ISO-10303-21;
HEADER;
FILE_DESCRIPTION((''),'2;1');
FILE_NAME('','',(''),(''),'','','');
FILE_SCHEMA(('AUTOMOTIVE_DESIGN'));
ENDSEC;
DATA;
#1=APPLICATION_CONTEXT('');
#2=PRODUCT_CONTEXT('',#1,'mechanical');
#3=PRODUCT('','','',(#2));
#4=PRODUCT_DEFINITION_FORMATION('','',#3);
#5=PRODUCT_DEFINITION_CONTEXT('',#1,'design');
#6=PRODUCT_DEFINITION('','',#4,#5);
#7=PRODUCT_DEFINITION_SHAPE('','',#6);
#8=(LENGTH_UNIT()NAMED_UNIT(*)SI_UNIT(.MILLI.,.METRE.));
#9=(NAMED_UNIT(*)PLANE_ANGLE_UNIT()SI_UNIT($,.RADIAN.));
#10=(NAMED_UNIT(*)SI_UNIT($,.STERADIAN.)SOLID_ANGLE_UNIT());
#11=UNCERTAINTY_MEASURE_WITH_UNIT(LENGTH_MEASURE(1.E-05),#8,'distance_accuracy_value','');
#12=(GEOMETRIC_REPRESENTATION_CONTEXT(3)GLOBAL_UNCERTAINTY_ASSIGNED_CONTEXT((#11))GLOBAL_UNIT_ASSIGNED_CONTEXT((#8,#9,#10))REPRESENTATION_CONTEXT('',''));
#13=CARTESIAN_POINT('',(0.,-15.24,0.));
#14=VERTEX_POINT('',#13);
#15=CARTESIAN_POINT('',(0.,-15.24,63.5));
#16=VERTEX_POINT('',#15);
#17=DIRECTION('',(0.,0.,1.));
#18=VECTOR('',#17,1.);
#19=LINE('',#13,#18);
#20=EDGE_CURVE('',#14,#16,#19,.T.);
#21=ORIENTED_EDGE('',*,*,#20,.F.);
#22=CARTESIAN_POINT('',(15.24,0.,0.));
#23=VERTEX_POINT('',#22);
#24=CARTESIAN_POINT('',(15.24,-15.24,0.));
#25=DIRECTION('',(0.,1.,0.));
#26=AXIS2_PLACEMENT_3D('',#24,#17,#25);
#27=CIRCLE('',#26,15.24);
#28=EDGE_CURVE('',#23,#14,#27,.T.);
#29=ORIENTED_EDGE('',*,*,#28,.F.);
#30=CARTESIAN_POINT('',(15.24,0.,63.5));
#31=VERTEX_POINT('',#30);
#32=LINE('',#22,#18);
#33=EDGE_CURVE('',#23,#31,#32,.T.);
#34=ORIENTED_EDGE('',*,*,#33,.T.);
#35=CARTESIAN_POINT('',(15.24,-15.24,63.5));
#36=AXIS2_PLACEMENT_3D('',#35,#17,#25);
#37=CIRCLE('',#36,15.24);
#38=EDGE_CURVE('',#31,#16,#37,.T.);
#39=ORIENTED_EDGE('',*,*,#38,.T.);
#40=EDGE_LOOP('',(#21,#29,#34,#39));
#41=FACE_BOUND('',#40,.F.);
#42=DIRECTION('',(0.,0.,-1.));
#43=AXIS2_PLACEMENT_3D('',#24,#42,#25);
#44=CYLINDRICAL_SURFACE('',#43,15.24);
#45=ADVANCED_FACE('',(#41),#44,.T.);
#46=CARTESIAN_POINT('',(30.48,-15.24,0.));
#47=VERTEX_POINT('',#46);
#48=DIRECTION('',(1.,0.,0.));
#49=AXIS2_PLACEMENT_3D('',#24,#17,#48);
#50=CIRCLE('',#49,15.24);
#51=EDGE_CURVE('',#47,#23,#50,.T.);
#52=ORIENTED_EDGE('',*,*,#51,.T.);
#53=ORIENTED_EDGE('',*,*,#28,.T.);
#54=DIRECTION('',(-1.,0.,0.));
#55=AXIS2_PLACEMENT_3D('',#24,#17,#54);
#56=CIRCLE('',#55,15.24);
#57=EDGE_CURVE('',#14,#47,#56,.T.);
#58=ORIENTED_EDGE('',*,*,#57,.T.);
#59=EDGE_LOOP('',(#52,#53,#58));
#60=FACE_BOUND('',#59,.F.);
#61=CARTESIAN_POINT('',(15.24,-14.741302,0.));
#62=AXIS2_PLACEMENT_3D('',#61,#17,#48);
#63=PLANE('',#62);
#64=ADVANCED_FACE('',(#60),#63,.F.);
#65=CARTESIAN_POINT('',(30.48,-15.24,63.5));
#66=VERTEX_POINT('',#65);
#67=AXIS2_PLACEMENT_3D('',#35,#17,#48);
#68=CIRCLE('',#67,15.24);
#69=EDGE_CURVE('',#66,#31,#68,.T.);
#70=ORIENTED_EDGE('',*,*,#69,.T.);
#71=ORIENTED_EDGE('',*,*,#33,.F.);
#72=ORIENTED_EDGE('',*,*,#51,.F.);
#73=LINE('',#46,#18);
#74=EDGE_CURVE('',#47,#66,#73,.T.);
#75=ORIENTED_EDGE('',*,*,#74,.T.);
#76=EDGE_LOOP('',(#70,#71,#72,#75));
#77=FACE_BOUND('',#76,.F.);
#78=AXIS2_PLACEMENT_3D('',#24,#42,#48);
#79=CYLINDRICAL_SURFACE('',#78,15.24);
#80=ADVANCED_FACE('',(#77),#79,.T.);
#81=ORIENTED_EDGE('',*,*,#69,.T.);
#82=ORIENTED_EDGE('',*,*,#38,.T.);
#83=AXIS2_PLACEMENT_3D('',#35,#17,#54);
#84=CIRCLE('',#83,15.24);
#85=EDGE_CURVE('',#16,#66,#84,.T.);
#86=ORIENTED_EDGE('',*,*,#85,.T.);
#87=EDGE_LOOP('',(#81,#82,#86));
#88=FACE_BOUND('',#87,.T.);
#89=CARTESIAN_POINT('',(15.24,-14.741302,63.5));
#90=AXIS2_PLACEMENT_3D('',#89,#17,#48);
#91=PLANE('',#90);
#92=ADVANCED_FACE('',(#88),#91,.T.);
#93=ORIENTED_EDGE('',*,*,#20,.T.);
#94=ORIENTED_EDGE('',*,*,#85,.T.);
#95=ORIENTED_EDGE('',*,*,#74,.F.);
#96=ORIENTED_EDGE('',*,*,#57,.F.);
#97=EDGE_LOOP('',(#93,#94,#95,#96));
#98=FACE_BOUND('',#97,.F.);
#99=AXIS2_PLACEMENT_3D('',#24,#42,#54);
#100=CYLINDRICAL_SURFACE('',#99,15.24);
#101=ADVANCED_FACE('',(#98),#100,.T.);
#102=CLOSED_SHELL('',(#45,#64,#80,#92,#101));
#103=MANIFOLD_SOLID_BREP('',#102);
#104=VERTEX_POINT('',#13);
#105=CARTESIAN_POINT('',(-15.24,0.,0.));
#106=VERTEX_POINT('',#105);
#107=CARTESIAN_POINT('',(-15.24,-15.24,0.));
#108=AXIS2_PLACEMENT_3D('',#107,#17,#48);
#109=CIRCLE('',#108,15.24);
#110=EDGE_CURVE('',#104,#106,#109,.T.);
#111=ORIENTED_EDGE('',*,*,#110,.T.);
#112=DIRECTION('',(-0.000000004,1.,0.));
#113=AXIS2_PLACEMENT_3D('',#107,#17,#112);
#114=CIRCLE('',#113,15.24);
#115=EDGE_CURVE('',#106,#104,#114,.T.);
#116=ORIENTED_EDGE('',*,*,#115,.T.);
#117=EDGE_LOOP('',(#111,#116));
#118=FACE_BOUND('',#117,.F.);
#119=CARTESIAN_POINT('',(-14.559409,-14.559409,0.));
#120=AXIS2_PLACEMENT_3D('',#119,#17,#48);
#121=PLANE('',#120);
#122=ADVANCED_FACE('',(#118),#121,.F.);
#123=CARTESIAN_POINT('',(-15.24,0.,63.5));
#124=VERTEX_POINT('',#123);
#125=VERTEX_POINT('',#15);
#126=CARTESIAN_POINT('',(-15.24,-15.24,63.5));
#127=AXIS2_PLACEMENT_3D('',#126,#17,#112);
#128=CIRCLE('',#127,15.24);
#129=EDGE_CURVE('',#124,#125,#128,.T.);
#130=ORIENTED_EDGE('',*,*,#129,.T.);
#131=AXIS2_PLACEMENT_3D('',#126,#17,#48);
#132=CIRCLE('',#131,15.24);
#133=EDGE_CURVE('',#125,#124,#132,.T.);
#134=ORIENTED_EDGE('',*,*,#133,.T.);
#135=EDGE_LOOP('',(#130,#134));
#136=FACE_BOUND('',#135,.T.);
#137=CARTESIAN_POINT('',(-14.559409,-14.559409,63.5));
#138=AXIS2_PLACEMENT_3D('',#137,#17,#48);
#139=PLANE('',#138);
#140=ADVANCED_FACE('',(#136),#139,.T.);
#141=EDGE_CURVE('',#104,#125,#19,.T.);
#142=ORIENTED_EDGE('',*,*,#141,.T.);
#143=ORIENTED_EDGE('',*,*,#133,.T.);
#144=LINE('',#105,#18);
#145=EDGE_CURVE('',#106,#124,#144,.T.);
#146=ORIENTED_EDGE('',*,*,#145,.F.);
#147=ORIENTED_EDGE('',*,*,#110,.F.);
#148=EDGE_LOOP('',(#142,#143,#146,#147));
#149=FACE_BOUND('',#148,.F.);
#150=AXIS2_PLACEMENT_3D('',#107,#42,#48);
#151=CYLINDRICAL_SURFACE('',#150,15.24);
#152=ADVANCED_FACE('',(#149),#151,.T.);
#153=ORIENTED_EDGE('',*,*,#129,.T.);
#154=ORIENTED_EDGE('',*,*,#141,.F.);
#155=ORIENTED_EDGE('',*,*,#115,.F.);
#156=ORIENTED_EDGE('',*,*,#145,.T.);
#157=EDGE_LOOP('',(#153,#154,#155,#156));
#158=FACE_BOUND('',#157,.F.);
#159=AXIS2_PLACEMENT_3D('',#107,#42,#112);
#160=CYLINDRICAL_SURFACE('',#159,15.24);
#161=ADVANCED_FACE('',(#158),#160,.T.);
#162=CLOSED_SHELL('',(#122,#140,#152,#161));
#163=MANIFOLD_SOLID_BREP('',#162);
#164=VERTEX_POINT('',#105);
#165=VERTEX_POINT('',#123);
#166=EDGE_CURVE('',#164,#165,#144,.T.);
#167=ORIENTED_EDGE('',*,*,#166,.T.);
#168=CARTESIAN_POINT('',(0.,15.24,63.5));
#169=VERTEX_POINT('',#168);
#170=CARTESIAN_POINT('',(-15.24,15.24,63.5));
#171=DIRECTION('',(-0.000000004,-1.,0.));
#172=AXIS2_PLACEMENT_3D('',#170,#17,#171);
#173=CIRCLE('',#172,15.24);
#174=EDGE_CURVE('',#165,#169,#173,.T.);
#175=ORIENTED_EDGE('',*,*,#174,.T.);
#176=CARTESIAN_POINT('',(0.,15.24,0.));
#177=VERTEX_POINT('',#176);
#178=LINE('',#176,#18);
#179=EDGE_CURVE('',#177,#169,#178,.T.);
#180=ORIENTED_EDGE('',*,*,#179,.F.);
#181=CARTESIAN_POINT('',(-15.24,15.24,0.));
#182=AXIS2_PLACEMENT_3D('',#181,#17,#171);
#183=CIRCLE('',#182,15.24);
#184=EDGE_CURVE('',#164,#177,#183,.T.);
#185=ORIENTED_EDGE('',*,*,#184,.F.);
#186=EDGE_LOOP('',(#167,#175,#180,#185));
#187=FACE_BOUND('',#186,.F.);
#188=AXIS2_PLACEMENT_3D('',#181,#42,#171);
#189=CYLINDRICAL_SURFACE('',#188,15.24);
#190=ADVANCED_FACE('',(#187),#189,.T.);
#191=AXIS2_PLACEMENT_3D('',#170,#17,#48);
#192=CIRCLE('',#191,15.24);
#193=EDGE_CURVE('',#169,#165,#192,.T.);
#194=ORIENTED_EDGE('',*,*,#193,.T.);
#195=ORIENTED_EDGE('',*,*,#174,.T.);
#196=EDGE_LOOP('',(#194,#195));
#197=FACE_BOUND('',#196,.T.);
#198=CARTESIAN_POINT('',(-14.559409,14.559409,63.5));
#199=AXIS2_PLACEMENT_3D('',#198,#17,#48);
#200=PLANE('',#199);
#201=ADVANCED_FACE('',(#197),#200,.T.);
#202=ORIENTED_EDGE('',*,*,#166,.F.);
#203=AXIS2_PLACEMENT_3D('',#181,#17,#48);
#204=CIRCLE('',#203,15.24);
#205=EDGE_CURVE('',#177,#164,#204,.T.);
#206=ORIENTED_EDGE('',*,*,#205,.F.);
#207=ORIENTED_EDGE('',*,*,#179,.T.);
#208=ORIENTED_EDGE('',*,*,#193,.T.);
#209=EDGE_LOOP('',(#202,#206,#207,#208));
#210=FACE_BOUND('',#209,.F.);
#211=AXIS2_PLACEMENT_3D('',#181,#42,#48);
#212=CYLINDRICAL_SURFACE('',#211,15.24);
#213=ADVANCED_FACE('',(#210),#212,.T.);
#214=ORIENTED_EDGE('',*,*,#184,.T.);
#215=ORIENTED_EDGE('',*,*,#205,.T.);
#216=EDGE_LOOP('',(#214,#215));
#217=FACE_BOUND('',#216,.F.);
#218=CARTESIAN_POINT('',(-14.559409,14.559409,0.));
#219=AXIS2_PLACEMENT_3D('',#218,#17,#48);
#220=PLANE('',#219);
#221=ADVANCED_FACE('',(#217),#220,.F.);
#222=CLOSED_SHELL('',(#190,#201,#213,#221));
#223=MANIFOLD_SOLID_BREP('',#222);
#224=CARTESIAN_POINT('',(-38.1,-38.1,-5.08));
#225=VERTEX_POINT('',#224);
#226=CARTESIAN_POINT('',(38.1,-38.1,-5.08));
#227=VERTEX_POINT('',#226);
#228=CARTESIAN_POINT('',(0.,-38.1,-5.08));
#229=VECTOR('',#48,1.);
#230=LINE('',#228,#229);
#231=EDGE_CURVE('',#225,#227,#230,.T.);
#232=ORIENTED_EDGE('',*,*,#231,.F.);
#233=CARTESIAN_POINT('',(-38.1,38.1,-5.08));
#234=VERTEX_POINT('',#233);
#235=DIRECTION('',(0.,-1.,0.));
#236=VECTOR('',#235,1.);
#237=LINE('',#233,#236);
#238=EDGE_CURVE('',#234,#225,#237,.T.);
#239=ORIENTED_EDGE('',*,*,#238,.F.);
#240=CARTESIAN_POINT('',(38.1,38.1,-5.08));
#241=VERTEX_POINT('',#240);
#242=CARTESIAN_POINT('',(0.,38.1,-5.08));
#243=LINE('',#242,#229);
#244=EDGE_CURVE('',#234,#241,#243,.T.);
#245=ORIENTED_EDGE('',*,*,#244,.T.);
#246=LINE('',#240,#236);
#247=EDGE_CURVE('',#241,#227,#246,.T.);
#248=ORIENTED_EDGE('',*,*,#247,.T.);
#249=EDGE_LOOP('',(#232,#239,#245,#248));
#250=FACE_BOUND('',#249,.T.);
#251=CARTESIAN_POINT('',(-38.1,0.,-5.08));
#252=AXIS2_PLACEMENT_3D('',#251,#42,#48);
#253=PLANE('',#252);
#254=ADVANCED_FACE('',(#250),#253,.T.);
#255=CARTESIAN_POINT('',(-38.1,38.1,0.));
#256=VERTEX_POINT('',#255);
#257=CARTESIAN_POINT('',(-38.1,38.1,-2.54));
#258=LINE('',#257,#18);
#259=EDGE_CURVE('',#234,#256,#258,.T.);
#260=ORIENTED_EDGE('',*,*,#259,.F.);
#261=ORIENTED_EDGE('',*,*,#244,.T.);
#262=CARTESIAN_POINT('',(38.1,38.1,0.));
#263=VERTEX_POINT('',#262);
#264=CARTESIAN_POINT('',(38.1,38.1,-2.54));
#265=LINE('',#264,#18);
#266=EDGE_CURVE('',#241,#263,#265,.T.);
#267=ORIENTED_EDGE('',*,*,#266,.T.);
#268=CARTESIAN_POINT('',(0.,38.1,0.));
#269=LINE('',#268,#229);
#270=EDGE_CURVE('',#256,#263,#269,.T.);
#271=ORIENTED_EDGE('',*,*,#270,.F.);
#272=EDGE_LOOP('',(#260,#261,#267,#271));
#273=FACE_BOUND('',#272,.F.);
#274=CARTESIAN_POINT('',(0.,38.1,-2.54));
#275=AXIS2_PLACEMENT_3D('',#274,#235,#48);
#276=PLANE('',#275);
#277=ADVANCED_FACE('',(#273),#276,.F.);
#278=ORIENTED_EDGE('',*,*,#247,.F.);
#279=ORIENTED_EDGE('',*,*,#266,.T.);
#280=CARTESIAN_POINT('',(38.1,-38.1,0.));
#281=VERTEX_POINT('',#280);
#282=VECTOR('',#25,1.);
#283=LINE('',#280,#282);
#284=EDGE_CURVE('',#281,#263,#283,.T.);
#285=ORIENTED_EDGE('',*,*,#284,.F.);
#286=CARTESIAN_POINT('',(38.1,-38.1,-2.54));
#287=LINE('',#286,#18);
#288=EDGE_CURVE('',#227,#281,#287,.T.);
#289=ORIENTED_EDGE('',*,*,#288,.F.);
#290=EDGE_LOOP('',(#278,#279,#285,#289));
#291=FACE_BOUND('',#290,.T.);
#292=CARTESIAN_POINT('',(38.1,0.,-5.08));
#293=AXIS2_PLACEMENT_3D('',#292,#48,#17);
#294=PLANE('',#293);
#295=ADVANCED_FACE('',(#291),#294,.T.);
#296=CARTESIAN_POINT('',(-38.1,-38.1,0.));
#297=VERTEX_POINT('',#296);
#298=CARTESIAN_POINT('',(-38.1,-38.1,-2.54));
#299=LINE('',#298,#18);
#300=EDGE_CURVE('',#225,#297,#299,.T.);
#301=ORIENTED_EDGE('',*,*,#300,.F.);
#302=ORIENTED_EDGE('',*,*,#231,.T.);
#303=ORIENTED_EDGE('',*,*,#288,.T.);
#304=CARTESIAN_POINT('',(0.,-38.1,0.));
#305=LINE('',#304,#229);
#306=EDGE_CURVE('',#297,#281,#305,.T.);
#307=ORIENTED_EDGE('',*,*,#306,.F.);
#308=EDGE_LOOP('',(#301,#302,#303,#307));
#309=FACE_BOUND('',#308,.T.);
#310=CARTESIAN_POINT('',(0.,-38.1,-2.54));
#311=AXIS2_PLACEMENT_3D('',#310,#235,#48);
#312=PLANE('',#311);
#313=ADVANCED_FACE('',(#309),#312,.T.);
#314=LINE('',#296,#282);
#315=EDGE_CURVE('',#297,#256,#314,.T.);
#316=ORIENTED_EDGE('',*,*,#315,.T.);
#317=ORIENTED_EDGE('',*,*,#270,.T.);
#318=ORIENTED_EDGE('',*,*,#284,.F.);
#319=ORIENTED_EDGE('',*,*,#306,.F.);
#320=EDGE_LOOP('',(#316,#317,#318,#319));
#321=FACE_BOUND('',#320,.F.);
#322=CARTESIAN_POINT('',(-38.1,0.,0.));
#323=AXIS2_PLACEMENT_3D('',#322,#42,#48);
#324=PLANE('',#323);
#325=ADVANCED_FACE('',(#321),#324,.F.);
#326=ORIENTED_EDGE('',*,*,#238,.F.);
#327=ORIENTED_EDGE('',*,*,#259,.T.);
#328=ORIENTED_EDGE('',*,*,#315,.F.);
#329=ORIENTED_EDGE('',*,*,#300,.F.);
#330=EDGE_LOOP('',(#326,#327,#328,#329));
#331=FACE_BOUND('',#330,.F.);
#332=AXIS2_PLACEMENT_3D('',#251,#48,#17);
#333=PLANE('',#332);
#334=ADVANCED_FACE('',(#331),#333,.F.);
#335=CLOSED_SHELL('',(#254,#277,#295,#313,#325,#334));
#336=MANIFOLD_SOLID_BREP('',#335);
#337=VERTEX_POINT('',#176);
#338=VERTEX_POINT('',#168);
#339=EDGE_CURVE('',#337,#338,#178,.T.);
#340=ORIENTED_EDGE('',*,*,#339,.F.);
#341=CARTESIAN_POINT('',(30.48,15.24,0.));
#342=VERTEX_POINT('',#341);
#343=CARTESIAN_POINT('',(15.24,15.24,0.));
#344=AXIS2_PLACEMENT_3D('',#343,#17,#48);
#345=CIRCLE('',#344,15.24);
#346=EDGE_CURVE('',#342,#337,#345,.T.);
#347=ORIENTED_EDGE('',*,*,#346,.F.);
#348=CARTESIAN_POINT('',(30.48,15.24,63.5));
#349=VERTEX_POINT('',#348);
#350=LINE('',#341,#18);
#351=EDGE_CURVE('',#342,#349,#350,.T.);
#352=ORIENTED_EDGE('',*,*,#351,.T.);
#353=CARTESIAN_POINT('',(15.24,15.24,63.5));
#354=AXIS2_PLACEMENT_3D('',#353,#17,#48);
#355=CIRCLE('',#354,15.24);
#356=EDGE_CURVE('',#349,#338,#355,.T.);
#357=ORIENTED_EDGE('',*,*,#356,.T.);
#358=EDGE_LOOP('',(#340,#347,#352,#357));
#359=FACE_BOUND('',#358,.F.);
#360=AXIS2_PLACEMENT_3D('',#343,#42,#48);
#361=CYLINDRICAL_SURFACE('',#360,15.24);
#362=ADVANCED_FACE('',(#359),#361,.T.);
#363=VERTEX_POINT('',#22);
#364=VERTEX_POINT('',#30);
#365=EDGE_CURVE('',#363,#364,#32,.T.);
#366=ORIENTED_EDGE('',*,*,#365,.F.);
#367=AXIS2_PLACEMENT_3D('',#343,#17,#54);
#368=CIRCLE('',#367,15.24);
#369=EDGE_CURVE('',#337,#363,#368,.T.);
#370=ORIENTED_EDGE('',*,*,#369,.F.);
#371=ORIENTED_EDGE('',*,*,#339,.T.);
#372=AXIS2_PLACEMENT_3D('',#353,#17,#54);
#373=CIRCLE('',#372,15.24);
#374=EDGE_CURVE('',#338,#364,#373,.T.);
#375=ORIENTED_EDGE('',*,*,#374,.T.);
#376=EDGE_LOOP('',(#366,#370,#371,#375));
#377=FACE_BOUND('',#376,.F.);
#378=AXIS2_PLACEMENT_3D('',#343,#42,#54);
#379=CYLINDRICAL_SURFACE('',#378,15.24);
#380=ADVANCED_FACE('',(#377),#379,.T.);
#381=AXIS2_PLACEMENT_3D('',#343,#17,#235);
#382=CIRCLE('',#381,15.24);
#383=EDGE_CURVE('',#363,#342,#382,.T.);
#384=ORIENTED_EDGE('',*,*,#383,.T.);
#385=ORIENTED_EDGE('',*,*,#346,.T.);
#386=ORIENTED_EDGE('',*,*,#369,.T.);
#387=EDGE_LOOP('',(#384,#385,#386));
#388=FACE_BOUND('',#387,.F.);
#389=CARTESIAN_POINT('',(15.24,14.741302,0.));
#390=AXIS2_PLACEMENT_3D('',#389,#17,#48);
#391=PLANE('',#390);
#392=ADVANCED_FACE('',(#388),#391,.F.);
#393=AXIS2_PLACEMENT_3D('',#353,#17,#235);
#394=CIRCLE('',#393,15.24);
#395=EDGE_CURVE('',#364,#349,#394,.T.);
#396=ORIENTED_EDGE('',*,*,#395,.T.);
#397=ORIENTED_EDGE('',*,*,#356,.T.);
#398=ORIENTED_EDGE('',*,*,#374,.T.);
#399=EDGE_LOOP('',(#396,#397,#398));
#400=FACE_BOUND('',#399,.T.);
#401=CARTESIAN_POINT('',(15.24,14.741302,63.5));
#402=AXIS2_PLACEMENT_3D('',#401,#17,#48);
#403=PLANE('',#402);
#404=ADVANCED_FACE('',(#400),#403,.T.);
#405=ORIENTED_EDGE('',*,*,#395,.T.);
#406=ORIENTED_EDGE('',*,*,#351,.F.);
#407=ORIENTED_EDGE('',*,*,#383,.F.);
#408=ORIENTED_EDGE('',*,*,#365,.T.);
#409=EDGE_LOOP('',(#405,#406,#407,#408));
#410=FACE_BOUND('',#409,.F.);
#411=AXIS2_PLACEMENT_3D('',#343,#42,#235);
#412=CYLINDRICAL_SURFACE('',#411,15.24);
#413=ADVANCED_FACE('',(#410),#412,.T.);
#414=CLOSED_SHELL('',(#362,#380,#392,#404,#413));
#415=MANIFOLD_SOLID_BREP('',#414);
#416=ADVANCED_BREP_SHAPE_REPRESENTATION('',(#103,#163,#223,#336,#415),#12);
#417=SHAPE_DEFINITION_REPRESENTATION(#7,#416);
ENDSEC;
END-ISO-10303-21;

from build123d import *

# Parameters (mm, degrees)
F1_DEPTH = 63.5
F2_W     = 76.2
F2_H     = 5.08
F3_DEPTH = 38.1


# Not quite as in the source:
# - a feature names something its author has since deleted; it is built from what else it names


with BuildPart() as f1:
    # F0 (on Top) → F1 (new body)
    with BuildSketch(Plane.XY):
        with BuildLine():
            ThreePointArc((-15.2400000598, 0), (-26.0163073241, -26.0163073664), (0, -15.24))
            ThreePointArc((0, -15.24), (-4.4636926759, -4.4636926336), (-15.2400000598, 0))
        make_face()
    extrude(amount=F1_DEPTH)


with BuildPart() as f1b:
    # F0 (on Top) → F1, piece 2 (new body)
    with BuildSketch(Plane.XY):
        with BuildLine():
            ThreePointArc((15.24, 0), (4.4636926547, -4.4636926547), (0, -15.24))
            ThreePointArc((0, -15.24), (15.24, -30.48), (30.48, -15.24))
            ThreePointArc((30.48, -15.24), (26.0163073453, -4.4636926547), (15.24, 0))
        make_face()
    extrude(amount=F1_DEPTH)


with BuildPart() as f1c:
    # F0 (on Top) → F1, piece 3 (new body)
    with BuildSketch(Plane.XY):
        with BuildLine():
            ThreePointArc((0, 15.24), (-26.0163073241, 26.0163073664), (-15.2400000598, 0))
            ThreePointArc((-15.2400000598, 0), (-4.4636926759, 4.4636926336), (0, 15.24))
        make_face()
    extrude(amount=F1_DEPTH)


with BuildPart() as f1d:
    # F0 (on Top) → F1, piece 4 (new body)
    with BuildSketch(Plane.XY):
        with BuildLine():
            ThreePointArc((0, 15.24), (4.4636926547, 4.4636926547), (15.24, 0))
            ThreePointArc((15.24, 0), (26.0163073453, 4.4636926547), (30.48, 15.24))
            ThreePointArc((30.48, 15.24), (15.24, 30.48), (0, 15.24))
        make_face()
    extrude(amount=F1_DEPTH)


with BuildPart() as f3:
    # F2 (on Front) → F3 (new body, symmetric)
    with BuildSketch(Plane.XZ):
        with Locations((0, -2.54)):
            Rectangle(F2_W, F2_H)
    extrude(amount=F3_DEPTH, both=True)


solid = Compound([f1.part, f1b.part, f1c.part, f1d.part, f3.part])
